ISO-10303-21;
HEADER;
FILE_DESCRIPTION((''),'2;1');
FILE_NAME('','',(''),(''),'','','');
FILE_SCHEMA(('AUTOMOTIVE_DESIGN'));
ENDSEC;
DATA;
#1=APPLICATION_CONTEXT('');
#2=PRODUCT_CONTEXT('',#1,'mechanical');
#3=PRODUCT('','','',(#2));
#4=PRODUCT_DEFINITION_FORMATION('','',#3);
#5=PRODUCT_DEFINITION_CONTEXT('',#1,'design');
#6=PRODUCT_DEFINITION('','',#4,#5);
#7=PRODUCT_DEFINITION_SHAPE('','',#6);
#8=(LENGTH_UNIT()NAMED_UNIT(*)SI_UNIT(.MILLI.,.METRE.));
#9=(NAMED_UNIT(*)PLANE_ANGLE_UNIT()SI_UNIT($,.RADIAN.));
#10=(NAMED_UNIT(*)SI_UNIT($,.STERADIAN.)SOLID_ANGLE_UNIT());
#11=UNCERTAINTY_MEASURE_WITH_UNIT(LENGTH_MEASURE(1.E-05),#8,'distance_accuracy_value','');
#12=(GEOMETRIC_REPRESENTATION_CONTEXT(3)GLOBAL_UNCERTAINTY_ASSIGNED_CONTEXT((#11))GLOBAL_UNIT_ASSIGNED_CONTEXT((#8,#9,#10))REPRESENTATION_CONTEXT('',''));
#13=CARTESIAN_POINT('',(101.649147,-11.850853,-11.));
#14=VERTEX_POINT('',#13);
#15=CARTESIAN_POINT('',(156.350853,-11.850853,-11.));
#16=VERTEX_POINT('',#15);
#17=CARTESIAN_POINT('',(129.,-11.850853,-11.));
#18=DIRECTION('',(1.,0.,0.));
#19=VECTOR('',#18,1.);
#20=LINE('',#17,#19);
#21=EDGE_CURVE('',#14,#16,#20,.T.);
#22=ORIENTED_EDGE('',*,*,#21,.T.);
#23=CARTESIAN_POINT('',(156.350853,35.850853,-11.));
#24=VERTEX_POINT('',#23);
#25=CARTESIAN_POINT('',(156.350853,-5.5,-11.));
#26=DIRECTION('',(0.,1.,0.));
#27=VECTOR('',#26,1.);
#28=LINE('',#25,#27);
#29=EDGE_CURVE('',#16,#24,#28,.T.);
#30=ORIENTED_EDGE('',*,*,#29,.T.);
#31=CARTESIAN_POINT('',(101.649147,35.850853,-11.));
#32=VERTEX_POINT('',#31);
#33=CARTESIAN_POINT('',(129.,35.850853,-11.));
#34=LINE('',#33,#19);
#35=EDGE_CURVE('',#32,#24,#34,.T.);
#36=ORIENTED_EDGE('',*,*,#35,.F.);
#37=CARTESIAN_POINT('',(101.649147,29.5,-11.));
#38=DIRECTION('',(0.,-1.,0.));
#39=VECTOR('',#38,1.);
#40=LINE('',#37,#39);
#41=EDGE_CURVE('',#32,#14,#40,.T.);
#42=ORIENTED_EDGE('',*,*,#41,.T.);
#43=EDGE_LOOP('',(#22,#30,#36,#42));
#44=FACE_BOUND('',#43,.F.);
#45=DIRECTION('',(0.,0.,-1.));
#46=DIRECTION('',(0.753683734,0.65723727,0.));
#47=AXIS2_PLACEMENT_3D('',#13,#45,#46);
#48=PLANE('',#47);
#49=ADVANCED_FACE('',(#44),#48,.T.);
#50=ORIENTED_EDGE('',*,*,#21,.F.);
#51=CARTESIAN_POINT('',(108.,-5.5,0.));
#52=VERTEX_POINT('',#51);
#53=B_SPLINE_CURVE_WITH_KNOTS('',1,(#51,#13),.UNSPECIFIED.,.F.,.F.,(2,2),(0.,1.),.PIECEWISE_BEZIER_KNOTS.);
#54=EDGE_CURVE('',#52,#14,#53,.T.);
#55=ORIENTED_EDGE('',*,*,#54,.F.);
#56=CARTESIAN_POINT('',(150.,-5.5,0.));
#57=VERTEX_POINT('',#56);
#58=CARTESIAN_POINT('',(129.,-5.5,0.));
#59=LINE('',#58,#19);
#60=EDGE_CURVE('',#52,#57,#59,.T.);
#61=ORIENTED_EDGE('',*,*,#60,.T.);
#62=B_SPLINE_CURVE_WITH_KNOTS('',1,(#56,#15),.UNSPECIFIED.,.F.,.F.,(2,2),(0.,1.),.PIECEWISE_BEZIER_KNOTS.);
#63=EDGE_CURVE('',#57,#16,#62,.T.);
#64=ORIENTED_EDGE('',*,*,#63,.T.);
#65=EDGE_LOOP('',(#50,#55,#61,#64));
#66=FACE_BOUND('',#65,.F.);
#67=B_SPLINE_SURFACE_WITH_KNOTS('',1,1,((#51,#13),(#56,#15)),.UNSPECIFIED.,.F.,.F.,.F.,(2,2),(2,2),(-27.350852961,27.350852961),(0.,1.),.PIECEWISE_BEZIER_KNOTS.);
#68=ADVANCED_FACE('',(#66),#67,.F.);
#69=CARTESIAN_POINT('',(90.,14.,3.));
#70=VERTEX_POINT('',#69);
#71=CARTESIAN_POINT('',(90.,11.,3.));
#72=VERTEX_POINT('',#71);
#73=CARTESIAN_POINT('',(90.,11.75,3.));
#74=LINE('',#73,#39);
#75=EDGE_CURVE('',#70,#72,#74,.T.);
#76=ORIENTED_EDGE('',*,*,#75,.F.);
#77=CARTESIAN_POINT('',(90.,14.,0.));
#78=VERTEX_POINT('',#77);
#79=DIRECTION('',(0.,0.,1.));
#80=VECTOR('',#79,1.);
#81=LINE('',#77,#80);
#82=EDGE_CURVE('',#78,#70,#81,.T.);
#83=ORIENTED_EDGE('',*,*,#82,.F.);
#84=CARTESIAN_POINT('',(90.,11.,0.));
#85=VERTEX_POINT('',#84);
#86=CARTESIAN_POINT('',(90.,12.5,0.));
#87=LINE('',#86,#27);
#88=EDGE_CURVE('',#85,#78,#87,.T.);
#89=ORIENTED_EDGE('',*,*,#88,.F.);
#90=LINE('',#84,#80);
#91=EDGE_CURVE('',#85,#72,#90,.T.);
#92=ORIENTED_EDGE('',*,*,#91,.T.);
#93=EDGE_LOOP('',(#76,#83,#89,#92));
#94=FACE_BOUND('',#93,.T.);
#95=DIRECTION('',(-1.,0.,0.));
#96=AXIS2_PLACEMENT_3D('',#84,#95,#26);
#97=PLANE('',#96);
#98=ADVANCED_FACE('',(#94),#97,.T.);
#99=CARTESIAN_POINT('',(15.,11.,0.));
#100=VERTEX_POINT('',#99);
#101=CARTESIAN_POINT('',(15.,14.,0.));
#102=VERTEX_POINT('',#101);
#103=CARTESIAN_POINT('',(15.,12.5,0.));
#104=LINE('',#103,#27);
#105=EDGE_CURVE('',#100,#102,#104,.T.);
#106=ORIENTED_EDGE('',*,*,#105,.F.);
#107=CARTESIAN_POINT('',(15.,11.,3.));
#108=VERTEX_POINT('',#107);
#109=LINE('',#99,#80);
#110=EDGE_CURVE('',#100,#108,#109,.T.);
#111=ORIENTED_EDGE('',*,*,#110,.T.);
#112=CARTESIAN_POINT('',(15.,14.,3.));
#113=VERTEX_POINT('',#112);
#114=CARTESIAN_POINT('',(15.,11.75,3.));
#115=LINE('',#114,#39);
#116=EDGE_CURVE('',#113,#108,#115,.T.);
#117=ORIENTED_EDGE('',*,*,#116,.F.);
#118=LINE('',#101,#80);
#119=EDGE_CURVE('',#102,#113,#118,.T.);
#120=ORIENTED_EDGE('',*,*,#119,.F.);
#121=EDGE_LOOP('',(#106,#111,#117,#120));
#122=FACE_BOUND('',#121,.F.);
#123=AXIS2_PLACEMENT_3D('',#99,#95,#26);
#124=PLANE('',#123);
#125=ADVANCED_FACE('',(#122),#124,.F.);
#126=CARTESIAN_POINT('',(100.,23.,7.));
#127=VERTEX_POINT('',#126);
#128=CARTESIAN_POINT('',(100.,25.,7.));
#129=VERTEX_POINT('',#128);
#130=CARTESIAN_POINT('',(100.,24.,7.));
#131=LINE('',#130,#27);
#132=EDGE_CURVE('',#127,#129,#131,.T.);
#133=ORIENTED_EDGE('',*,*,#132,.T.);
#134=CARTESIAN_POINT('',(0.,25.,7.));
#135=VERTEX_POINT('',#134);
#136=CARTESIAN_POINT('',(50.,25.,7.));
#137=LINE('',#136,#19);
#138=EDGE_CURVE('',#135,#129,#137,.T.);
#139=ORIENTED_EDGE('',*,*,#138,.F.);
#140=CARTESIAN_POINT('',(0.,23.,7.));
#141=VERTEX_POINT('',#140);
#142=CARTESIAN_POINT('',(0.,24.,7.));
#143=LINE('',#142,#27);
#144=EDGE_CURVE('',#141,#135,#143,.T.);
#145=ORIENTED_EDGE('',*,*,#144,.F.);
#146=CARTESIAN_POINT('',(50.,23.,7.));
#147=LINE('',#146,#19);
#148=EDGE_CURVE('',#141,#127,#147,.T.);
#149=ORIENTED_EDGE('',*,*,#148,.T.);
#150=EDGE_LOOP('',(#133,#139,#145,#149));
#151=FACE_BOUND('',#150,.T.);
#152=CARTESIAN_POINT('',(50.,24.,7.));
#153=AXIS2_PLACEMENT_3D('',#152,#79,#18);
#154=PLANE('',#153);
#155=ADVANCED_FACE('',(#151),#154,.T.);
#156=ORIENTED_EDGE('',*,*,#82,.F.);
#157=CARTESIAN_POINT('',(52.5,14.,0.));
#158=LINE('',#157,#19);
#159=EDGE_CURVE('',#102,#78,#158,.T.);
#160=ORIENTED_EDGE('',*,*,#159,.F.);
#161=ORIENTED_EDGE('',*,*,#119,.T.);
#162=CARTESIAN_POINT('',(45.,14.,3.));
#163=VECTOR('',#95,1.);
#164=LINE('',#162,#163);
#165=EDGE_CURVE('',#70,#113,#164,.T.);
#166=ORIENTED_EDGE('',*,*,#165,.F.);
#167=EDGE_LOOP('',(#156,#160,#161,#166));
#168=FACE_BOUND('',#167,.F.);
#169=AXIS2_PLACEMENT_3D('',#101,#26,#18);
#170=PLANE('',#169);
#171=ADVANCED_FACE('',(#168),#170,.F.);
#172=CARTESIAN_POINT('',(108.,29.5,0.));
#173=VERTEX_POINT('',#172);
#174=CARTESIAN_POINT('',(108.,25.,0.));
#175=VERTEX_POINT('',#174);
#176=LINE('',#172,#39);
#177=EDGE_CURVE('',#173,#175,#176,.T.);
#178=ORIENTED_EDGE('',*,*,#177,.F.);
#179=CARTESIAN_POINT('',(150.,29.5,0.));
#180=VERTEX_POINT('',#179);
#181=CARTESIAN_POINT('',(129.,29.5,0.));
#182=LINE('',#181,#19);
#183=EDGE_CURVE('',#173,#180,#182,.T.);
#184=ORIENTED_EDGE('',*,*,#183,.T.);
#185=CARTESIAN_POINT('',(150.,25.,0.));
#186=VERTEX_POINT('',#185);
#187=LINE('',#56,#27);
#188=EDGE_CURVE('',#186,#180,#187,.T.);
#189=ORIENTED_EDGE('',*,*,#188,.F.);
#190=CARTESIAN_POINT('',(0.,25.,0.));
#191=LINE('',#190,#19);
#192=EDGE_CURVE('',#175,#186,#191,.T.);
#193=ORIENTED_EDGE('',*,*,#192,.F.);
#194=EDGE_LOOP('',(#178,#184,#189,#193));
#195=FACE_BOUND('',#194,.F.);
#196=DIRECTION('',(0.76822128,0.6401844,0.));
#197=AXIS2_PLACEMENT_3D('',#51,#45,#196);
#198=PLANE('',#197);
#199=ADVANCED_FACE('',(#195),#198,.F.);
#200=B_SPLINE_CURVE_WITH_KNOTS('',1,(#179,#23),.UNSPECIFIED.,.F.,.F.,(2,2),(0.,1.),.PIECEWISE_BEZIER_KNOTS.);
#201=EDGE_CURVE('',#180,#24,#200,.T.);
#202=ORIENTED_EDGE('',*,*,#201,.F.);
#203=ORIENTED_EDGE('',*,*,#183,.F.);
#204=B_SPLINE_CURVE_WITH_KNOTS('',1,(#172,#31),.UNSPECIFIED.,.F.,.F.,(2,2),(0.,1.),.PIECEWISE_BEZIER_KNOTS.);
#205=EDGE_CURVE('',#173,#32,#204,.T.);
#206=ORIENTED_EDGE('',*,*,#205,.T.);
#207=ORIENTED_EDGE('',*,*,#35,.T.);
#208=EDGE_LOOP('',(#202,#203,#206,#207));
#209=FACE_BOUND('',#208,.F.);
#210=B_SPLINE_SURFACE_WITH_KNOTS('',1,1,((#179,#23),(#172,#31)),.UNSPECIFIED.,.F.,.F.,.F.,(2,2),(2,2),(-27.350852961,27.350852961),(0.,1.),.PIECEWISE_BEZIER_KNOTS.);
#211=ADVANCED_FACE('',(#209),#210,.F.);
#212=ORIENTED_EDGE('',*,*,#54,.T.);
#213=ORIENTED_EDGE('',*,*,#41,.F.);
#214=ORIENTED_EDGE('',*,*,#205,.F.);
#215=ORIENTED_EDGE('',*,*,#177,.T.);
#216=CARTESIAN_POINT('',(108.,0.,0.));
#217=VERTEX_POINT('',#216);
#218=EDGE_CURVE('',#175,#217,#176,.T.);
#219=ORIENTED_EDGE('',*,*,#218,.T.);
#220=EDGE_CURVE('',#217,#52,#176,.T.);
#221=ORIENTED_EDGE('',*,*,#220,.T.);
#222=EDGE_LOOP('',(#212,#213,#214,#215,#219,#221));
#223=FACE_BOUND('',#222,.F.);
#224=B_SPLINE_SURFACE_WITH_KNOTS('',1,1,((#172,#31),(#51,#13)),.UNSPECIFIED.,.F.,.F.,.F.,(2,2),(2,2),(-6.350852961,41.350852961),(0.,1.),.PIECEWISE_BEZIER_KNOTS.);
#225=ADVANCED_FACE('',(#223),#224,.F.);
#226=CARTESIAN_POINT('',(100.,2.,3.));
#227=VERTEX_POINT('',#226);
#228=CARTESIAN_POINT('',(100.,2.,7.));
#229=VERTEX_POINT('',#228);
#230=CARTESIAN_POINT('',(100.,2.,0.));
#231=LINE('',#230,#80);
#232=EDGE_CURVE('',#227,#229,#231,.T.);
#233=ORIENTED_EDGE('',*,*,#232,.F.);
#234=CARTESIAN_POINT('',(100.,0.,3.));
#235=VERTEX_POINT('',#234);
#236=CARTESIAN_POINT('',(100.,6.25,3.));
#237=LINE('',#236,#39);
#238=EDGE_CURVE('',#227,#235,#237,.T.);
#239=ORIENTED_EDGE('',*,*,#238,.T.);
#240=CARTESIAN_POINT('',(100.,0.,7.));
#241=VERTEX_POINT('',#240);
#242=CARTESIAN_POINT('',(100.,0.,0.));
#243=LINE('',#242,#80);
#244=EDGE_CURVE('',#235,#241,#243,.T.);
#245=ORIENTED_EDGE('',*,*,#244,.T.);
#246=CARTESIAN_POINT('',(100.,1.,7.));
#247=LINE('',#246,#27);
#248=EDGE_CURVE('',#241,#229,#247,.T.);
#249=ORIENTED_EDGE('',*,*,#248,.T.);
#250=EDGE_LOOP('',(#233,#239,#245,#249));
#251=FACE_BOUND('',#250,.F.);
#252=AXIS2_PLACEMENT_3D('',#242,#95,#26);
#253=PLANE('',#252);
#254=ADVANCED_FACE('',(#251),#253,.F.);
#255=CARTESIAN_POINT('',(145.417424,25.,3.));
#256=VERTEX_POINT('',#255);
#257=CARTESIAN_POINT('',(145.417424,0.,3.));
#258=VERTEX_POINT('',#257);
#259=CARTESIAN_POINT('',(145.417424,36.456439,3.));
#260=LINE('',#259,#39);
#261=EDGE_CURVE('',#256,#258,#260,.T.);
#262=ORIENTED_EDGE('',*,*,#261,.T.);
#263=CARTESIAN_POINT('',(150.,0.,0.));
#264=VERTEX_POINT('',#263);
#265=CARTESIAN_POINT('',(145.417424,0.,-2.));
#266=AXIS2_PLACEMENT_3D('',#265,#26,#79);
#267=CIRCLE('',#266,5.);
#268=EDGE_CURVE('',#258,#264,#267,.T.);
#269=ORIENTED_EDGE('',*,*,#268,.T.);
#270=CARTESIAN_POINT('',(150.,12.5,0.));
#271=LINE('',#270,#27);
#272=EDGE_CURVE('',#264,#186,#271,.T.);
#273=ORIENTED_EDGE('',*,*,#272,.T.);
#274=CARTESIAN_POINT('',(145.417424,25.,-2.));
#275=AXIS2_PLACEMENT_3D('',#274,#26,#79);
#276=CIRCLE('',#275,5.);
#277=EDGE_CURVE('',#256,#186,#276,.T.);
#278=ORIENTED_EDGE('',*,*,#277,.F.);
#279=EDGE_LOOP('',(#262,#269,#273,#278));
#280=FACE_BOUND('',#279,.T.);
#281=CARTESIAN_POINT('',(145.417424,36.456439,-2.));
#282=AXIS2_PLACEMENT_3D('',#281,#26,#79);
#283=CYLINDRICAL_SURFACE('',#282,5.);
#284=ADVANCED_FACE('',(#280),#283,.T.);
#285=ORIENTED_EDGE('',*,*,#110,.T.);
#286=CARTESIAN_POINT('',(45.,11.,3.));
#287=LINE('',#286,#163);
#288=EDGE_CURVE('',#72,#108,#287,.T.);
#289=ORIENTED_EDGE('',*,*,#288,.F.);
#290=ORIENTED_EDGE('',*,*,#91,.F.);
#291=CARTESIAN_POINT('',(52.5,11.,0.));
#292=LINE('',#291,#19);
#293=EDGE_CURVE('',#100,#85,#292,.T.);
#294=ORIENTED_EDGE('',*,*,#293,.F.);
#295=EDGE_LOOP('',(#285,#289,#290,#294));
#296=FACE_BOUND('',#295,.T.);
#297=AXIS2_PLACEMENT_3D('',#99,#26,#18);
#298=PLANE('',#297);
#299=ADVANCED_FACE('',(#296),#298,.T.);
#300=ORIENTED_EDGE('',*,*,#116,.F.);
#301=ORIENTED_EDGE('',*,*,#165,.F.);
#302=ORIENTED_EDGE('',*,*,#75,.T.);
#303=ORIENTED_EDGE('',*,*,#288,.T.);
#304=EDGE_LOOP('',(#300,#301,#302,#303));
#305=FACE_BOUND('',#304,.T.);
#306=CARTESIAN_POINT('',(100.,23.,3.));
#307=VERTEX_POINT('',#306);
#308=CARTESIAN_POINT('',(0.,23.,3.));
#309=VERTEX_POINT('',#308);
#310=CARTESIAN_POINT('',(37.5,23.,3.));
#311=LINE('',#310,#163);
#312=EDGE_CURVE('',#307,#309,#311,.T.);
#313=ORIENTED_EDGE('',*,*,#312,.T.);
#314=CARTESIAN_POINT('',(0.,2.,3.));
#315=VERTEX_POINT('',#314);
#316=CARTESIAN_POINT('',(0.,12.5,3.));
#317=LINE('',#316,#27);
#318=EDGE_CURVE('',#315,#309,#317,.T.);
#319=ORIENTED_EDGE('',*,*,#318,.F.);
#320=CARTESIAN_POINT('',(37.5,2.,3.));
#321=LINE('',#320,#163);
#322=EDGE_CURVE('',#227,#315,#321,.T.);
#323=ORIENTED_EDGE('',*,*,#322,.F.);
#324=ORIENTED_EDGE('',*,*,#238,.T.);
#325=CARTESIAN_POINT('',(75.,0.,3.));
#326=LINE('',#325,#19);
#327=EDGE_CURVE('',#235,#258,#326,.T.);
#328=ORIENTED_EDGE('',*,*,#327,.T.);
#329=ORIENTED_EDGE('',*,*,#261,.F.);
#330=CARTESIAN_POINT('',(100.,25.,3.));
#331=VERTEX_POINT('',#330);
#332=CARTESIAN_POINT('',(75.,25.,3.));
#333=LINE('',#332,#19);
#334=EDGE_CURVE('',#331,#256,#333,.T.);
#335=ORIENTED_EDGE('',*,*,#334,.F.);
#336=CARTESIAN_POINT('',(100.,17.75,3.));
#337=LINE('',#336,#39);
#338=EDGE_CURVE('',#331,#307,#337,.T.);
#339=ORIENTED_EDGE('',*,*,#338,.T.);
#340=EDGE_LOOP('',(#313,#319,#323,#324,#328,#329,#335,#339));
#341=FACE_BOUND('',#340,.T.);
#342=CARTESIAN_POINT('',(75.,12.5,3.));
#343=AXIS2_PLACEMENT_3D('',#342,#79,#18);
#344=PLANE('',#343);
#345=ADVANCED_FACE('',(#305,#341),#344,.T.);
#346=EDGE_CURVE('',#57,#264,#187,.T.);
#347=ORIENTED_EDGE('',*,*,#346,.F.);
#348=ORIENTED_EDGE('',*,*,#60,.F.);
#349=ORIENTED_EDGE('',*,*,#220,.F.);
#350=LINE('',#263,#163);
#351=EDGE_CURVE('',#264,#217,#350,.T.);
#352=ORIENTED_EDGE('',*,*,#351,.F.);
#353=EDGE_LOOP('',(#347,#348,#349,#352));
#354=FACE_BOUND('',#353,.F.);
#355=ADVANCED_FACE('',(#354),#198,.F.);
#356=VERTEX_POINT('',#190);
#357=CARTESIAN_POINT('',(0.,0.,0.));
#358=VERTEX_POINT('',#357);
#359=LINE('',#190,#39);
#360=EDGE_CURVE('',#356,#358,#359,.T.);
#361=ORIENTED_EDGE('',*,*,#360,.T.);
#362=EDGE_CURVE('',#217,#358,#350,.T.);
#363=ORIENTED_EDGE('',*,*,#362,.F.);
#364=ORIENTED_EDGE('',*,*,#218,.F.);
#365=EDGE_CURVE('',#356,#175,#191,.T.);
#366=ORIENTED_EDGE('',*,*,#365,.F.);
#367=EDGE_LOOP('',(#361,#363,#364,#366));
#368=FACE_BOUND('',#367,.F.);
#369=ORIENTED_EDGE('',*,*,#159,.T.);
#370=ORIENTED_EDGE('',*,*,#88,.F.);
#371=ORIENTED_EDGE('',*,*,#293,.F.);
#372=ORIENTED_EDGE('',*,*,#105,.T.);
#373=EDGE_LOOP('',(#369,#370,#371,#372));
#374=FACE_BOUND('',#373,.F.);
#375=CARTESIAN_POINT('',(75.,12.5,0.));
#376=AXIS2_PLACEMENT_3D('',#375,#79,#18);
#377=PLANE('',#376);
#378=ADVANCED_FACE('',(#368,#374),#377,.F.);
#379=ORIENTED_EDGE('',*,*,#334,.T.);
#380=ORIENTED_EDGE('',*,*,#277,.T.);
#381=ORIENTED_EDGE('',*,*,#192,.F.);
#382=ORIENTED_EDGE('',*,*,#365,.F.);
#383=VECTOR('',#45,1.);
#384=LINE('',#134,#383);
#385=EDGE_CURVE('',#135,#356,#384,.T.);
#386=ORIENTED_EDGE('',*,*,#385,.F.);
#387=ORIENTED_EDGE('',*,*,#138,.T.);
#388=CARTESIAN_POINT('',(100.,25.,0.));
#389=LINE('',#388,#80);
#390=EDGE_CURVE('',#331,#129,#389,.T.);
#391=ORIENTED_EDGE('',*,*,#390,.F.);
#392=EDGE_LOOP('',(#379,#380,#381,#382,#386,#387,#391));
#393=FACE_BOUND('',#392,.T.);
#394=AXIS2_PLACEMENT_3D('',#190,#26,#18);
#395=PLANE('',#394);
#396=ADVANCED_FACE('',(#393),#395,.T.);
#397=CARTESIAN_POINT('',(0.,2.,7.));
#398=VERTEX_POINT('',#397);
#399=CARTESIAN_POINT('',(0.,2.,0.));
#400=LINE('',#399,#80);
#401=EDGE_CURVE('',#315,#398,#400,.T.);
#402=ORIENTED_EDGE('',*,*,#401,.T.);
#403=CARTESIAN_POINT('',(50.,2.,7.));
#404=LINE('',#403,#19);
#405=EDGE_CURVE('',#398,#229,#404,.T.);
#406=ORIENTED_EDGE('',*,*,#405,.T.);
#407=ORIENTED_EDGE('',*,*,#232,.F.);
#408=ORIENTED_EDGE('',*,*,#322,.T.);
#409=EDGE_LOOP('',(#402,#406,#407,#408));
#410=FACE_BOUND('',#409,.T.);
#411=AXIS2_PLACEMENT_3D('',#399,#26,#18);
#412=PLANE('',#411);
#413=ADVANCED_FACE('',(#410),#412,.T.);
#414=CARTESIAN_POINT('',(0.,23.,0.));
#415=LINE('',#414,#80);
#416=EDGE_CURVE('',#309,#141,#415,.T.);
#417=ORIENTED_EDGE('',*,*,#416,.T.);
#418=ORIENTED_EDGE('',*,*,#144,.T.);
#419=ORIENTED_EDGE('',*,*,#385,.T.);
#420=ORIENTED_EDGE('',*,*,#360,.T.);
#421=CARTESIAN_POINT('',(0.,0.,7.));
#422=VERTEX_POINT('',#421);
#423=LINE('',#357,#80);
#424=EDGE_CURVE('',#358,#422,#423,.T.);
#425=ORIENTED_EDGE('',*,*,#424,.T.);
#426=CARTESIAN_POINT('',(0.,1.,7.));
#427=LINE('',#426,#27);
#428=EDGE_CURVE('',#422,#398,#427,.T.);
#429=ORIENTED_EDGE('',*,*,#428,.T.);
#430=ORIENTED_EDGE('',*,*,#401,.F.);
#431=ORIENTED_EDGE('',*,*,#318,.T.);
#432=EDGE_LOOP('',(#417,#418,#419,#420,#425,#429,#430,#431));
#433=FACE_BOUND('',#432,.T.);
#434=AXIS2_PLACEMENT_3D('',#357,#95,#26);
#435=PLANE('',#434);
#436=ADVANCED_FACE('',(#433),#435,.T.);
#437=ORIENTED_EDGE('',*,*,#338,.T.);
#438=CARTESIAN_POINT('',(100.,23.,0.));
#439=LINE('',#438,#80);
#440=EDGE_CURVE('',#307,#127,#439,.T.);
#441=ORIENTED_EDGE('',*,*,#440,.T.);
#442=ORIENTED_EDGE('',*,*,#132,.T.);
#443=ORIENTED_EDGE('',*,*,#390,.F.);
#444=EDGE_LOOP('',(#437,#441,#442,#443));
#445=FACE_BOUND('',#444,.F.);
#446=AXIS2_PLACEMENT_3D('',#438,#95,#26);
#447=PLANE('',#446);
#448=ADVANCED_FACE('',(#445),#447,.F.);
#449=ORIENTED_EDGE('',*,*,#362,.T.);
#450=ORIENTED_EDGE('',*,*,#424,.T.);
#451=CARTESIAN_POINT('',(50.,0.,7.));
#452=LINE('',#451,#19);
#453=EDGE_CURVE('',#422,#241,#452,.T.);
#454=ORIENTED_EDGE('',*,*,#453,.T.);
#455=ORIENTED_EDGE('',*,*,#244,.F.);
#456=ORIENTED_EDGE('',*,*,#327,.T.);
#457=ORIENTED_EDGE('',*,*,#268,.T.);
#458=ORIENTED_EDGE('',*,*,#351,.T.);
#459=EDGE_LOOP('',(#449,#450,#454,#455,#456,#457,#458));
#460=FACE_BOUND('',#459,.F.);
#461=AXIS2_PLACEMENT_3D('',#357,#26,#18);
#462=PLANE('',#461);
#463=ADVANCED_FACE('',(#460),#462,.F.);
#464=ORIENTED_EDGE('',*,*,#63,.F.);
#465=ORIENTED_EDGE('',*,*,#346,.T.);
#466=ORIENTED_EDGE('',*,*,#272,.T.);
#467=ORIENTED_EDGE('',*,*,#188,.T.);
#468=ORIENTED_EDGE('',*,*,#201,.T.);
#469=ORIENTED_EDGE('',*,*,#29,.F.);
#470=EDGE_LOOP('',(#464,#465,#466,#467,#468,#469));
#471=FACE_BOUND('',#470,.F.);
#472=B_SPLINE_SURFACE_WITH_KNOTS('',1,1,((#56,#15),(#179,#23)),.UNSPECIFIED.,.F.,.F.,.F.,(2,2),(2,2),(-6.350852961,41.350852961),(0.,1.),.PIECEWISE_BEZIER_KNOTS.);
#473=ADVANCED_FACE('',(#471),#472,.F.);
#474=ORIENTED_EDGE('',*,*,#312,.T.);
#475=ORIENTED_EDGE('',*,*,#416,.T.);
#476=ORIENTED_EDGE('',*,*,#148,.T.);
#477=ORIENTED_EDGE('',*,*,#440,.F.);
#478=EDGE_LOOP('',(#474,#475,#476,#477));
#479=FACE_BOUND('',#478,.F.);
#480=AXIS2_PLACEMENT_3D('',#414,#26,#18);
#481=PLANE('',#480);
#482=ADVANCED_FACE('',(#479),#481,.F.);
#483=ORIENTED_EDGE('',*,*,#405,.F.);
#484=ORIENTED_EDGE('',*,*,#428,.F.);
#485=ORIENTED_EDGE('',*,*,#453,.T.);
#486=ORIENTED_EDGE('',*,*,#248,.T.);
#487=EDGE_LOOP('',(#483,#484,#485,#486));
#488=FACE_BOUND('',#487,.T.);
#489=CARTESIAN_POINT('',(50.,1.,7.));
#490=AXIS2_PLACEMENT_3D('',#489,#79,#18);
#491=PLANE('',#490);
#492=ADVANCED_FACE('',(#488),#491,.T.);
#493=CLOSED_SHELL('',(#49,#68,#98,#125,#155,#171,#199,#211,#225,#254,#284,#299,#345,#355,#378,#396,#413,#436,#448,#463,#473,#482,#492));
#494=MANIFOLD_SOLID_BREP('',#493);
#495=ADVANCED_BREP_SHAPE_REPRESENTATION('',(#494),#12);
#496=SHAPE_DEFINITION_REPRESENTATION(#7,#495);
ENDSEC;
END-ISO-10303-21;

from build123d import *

# Parameters (mm, degrees)
F0_W        = 150
F0_H        = 25
F1_DEPTH    = 3
F2_W        = 100
F2_H        = 2
F3_DEPTH    = 7
F4_W        = 42
F4_H        = 5.5
F4_H_2      = 29.5
F5_DEPTH    = 11
F5_TAPER    = -30
F6_W        = 75
F6_H        = 3
F7_DEPTH    = 7.001
F8_T1_DEPTH = 47.9128784748


# Not quite as in the source:
# - a fillet or chamfer that OpenCascade refuses, or shapes differently, is made with other operations: its cross-section is extruded or revolved along the edge and cut away or added


with BuildPart() as f1:
    # F0 (on Top) → F1 (new body)
    with BuildSketch(Plane.XY):
        with Locations((75, 12.5)):
            Rectangle(F0_W, F0_H)
    extrude(amount=F1_DEPTH)

    # F2 (on Top) → F3 (join)
    with BuildSketch(Plane.XY):
        with Locations((50, 24)):
            Rectangle(F2_W, F2_H)
        with Locations((50, 1)):
            Rectangle(F2_W, F2_H)
    extrude(amount=F3_DEPTH)

    # F4 (on Top) → F5 (join)
    with BuildSketch(Plane.XY):
        with Locations((129, -2.75)):
            Rectangle(F4_W, F4_H)
        with Locations((129, 14.75)):
            Rectangle(F4_W, F4_H_2)
    extrude(amount=-F5_DEPTH, taper=F5_TAPER)

    # F6 (on Top) → F7 (cut, through all)
    with BuildSketch(Plane.XY):
        with Locations((52.5, 12.5)):
            Rectangle(F6_W, F6_H)
    extrude(amount=F7_DEPTH, mode=Mode.SUBTRACT)

    # F8: fillet of radius 5 on 1 edges, made by hand

    # F8_s2 → F8_t1 (cut)
    with BuildSketch(Plane.XZ.offset(-36.4564392374)):
        with BuildLine():
            ThreePointArc((145.417424305, 3), (148.1560370926, 2.1833001327), (150, 0))
            Line((150, 0), (150.0916515139, 0.04))
            ThreePointArc((150.0916515139, 0.04), (150.1, 1.5), (150.1, 3))
            Line((150.1, 3), (150, 3.1))
            Line((150, 3.1), (145.417424305, 3.1))
            Line((145.417424305, 3.1), (145.417424305, 3))
        make_face()
    extrude(amount=F8_T1_DEPTH, mode=Mode.SUBTRACT)


solid = f1.part
